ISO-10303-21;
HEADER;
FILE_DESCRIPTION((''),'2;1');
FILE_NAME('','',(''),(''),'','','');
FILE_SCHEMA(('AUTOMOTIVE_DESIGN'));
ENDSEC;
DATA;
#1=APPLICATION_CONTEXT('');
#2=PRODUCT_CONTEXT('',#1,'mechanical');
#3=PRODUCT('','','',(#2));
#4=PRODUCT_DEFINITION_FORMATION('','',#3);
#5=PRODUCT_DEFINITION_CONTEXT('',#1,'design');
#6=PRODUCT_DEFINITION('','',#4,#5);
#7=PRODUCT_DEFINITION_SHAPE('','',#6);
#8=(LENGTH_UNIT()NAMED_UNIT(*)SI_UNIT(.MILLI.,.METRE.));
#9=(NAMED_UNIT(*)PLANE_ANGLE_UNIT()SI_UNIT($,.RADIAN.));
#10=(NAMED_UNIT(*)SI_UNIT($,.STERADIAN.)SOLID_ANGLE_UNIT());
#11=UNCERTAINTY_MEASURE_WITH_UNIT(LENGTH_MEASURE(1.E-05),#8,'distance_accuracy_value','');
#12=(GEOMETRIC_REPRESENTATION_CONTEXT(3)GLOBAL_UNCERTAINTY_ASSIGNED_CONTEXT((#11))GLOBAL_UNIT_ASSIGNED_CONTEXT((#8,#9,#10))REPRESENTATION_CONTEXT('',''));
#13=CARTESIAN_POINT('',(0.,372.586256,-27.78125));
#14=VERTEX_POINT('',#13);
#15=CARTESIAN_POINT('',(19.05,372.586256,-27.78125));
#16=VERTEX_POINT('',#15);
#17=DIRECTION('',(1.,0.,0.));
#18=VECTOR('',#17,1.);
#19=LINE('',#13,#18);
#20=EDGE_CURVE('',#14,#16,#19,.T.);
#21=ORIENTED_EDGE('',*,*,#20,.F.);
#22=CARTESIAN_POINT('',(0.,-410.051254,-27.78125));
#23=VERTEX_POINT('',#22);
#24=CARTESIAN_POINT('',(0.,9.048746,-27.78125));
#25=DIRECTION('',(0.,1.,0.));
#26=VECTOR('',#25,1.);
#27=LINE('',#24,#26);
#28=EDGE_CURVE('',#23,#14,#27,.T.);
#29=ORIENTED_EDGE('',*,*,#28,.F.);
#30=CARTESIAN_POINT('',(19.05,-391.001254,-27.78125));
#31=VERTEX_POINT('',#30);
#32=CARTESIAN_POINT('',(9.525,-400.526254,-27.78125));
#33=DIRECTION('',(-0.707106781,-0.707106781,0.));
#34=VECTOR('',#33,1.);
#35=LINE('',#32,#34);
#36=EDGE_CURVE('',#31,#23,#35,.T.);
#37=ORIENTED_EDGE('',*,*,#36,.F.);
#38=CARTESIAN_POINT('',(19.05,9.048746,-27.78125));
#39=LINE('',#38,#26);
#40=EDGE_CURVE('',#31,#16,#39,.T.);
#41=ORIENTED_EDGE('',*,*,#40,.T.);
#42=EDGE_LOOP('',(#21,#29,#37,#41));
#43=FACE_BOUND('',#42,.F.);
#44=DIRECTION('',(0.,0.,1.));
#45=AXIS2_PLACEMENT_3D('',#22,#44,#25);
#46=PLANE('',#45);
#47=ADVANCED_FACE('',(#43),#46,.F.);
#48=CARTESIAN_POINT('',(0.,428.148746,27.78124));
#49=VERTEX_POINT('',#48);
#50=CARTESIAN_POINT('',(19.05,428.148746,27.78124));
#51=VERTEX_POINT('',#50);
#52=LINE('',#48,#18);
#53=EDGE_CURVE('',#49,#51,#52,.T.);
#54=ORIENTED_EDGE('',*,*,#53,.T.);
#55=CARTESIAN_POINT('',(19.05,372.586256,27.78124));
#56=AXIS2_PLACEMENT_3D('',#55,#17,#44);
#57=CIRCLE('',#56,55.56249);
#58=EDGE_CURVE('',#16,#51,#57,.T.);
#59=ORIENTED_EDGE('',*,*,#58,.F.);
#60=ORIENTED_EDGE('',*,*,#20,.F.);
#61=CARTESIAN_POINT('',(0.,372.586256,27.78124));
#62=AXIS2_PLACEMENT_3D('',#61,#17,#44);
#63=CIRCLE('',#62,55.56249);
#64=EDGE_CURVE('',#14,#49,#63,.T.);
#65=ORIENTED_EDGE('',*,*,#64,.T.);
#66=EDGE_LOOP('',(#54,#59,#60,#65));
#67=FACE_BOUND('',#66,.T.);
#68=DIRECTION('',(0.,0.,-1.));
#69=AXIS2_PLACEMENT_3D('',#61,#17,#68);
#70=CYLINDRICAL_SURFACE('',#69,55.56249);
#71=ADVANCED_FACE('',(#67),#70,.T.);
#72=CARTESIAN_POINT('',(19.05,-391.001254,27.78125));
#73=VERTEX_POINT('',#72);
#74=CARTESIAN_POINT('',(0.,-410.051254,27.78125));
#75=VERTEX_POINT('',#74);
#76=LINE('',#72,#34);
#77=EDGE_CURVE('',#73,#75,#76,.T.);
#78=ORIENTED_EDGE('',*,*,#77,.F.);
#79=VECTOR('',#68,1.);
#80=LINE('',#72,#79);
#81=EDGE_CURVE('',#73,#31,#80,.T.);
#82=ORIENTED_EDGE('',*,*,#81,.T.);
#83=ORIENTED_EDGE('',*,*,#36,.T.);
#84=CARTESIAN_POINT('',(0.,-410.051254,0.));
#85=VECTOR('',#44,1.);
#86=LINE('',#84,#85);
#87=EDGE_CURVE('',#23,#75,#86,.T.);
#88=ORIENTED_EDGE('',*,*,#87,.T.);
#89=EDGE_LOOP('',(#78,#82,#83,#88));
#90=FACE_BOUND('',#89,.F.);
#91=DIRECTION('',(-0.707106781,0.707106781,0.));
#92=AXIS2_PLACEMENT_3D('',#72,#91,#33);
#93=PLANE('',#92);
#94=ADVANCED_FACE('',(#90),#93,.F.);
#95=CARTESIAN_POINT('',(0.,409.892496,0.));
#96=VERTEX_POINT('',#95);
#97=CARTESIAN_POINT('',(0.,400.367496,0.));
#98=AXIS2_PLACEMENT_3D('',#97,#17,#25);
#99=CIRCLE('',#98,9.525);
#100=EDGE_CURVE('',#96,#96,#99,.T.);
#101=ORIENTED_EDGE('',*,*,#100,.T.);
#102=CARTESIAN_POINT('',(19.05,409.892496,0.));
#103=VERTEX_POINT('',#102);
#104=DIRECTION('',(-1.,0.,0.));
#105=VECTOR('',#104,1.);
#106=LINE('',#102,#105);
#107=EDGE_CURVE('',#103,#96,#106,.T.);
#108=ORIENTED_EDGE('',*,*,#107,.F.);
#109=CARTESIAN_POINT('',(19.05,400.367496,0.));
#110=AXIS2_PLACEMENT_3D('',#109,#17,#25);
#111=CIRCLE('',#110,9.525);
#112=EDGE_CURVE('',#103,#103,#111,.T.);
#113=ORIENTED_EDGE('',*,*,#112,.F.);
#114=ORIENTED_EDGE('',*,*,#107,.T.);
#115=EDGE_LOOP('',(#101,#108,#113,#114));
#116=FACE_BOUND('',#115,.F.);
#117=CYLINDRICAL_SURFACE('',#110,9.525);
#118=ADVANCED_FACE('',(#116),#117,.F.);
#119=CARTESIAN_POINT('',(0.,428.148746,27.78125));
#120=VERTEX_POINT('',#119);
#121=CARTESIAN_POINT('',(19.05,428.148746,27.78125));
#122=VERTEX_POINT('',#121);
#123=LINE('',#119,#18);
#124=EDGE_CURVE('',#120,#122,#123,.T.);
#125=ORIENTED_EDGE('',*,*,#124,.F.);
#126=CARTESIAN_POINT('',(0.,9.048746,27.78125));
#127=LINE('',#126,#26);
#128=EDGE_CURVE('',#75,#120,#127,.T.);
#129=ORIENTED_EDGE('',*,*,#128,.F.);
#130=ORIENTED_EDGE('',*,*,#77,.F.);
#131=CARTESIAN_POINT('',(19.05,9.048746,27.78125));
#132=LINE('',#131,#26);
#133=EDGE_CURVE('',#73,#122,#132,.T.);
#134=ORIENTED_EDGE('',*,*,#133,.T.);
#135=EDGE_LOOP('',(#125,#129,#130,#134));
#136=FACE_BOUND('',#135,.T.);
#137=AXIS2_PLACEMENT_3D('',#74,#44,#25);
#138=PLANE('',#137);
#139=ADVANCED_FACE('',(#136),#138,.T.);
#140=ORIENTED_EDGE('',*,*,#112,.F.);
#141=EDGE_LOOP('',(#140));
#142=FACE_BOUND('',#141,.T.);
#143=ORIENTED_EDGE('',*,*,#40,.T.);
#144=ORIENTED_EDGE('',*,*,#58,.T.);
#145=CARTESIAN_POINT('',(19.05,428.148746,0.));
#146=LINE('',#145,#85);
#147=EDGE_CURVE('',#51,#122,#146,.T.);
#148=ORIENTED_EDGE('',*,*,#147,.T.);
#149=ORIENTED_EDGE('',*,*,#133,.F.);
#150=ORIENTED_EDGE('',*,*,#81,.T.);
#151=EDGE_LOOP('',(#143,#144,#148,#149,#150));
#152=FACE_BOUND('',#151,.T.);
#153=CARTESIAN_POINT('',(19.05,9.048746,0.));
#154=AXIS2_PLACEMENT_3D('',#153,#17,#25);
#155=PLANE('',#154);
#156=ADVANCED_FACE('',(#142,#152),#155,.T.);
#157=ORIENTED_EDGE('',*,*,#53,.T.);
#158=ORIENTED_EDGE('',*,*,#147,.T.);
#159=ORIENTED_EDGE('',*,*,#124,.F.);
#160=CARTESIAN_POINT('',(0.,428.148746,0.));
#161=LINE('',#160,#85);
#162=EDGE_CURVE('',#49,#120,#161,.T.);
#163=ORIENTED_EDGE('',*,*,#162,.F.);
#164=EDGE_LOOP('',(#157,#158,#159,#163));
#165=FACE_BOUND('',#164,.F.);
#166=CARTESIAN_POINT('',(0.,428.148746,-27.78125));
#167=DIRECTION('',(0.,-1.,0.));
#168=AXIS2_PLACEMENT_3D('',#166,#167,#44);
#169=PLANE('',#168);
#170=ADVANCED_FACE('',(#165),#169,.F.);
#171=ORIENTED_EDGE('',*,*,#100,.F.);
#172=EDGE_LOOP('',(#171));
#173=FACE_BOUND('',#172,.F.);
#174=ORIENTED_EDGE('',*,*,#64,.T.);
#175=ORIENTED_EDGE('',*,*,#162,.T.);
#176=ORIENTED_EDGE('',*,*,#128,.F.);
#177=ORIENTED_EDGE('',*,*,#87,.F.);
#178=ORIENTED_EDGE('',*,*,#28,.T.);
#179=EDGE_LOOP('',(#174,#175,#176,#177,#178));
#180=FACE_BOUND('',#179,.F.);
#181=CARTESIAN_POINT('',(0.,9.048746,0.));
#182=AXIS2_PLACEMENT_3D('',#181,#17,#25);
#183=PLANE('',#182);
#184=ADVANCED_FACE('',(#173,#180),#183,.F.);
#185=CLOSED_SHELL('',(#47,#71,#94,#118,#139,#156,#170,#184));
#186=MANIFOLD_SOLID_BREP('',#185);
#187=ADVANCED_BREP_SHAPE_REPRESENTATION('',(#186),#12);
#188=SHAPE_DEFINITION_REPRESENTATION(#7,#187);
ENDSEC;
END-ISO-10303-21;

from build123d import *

# Parameters (mm, degrees)
F0_W     = 838.2
F0_H     = 55.5625
F1_DEPTH = 19.05
F2_R     = 55.56249
F3_R     = 9.525
F4_DEPTH = 25.4
F6_DEPTH = 55.5635


# Not quite as in the source:
# - a fillet or chamfer is up to 0.001 mm smaller than in the source, because OpenCascade refuses the exact size


with BuildPart() as f1:
    # F0 (on Right) → F1 (new body)
    with BuildSketch(Plane.YZ):
        with Locations((9.0487459762, 0)):
            Rectangle(F0_W, F0_H)
    extrude(amount=F1_DEPTH)

    # F2 (radius 55.5625 in the source; OpenCascade refuses exactly that, so slightly less here)
    f2_edges = [f1.edges().sort_by_distance(p)[0] for p in [
        (9.525, 428.148746, -27.78125),
    ]]
    fillet(f2_edges, radius=F2_R)

    # F3 (on face) → F4 (cut)
    with BuildSketch(Plane.YZ.offset(19.05)):
        with Locations((400.3674959762, 0)):
            Circle(F3_R)
    extrude(amount=-F4_DEPTH, mode=Mode.SUBTRACT)

    # F5 (on face) → F6 (cut, through all)
    with BuildSketch(Plane.XY.offset(27.78125)):
        Polygon((19.05, -391.0012540238), (0, -410.0512540238), (19.05, -410.0512540238), align=None)
    extrude(amount=-F6_DEPTH, mode=Mode.SUBTRACT)


solid = f1.part
